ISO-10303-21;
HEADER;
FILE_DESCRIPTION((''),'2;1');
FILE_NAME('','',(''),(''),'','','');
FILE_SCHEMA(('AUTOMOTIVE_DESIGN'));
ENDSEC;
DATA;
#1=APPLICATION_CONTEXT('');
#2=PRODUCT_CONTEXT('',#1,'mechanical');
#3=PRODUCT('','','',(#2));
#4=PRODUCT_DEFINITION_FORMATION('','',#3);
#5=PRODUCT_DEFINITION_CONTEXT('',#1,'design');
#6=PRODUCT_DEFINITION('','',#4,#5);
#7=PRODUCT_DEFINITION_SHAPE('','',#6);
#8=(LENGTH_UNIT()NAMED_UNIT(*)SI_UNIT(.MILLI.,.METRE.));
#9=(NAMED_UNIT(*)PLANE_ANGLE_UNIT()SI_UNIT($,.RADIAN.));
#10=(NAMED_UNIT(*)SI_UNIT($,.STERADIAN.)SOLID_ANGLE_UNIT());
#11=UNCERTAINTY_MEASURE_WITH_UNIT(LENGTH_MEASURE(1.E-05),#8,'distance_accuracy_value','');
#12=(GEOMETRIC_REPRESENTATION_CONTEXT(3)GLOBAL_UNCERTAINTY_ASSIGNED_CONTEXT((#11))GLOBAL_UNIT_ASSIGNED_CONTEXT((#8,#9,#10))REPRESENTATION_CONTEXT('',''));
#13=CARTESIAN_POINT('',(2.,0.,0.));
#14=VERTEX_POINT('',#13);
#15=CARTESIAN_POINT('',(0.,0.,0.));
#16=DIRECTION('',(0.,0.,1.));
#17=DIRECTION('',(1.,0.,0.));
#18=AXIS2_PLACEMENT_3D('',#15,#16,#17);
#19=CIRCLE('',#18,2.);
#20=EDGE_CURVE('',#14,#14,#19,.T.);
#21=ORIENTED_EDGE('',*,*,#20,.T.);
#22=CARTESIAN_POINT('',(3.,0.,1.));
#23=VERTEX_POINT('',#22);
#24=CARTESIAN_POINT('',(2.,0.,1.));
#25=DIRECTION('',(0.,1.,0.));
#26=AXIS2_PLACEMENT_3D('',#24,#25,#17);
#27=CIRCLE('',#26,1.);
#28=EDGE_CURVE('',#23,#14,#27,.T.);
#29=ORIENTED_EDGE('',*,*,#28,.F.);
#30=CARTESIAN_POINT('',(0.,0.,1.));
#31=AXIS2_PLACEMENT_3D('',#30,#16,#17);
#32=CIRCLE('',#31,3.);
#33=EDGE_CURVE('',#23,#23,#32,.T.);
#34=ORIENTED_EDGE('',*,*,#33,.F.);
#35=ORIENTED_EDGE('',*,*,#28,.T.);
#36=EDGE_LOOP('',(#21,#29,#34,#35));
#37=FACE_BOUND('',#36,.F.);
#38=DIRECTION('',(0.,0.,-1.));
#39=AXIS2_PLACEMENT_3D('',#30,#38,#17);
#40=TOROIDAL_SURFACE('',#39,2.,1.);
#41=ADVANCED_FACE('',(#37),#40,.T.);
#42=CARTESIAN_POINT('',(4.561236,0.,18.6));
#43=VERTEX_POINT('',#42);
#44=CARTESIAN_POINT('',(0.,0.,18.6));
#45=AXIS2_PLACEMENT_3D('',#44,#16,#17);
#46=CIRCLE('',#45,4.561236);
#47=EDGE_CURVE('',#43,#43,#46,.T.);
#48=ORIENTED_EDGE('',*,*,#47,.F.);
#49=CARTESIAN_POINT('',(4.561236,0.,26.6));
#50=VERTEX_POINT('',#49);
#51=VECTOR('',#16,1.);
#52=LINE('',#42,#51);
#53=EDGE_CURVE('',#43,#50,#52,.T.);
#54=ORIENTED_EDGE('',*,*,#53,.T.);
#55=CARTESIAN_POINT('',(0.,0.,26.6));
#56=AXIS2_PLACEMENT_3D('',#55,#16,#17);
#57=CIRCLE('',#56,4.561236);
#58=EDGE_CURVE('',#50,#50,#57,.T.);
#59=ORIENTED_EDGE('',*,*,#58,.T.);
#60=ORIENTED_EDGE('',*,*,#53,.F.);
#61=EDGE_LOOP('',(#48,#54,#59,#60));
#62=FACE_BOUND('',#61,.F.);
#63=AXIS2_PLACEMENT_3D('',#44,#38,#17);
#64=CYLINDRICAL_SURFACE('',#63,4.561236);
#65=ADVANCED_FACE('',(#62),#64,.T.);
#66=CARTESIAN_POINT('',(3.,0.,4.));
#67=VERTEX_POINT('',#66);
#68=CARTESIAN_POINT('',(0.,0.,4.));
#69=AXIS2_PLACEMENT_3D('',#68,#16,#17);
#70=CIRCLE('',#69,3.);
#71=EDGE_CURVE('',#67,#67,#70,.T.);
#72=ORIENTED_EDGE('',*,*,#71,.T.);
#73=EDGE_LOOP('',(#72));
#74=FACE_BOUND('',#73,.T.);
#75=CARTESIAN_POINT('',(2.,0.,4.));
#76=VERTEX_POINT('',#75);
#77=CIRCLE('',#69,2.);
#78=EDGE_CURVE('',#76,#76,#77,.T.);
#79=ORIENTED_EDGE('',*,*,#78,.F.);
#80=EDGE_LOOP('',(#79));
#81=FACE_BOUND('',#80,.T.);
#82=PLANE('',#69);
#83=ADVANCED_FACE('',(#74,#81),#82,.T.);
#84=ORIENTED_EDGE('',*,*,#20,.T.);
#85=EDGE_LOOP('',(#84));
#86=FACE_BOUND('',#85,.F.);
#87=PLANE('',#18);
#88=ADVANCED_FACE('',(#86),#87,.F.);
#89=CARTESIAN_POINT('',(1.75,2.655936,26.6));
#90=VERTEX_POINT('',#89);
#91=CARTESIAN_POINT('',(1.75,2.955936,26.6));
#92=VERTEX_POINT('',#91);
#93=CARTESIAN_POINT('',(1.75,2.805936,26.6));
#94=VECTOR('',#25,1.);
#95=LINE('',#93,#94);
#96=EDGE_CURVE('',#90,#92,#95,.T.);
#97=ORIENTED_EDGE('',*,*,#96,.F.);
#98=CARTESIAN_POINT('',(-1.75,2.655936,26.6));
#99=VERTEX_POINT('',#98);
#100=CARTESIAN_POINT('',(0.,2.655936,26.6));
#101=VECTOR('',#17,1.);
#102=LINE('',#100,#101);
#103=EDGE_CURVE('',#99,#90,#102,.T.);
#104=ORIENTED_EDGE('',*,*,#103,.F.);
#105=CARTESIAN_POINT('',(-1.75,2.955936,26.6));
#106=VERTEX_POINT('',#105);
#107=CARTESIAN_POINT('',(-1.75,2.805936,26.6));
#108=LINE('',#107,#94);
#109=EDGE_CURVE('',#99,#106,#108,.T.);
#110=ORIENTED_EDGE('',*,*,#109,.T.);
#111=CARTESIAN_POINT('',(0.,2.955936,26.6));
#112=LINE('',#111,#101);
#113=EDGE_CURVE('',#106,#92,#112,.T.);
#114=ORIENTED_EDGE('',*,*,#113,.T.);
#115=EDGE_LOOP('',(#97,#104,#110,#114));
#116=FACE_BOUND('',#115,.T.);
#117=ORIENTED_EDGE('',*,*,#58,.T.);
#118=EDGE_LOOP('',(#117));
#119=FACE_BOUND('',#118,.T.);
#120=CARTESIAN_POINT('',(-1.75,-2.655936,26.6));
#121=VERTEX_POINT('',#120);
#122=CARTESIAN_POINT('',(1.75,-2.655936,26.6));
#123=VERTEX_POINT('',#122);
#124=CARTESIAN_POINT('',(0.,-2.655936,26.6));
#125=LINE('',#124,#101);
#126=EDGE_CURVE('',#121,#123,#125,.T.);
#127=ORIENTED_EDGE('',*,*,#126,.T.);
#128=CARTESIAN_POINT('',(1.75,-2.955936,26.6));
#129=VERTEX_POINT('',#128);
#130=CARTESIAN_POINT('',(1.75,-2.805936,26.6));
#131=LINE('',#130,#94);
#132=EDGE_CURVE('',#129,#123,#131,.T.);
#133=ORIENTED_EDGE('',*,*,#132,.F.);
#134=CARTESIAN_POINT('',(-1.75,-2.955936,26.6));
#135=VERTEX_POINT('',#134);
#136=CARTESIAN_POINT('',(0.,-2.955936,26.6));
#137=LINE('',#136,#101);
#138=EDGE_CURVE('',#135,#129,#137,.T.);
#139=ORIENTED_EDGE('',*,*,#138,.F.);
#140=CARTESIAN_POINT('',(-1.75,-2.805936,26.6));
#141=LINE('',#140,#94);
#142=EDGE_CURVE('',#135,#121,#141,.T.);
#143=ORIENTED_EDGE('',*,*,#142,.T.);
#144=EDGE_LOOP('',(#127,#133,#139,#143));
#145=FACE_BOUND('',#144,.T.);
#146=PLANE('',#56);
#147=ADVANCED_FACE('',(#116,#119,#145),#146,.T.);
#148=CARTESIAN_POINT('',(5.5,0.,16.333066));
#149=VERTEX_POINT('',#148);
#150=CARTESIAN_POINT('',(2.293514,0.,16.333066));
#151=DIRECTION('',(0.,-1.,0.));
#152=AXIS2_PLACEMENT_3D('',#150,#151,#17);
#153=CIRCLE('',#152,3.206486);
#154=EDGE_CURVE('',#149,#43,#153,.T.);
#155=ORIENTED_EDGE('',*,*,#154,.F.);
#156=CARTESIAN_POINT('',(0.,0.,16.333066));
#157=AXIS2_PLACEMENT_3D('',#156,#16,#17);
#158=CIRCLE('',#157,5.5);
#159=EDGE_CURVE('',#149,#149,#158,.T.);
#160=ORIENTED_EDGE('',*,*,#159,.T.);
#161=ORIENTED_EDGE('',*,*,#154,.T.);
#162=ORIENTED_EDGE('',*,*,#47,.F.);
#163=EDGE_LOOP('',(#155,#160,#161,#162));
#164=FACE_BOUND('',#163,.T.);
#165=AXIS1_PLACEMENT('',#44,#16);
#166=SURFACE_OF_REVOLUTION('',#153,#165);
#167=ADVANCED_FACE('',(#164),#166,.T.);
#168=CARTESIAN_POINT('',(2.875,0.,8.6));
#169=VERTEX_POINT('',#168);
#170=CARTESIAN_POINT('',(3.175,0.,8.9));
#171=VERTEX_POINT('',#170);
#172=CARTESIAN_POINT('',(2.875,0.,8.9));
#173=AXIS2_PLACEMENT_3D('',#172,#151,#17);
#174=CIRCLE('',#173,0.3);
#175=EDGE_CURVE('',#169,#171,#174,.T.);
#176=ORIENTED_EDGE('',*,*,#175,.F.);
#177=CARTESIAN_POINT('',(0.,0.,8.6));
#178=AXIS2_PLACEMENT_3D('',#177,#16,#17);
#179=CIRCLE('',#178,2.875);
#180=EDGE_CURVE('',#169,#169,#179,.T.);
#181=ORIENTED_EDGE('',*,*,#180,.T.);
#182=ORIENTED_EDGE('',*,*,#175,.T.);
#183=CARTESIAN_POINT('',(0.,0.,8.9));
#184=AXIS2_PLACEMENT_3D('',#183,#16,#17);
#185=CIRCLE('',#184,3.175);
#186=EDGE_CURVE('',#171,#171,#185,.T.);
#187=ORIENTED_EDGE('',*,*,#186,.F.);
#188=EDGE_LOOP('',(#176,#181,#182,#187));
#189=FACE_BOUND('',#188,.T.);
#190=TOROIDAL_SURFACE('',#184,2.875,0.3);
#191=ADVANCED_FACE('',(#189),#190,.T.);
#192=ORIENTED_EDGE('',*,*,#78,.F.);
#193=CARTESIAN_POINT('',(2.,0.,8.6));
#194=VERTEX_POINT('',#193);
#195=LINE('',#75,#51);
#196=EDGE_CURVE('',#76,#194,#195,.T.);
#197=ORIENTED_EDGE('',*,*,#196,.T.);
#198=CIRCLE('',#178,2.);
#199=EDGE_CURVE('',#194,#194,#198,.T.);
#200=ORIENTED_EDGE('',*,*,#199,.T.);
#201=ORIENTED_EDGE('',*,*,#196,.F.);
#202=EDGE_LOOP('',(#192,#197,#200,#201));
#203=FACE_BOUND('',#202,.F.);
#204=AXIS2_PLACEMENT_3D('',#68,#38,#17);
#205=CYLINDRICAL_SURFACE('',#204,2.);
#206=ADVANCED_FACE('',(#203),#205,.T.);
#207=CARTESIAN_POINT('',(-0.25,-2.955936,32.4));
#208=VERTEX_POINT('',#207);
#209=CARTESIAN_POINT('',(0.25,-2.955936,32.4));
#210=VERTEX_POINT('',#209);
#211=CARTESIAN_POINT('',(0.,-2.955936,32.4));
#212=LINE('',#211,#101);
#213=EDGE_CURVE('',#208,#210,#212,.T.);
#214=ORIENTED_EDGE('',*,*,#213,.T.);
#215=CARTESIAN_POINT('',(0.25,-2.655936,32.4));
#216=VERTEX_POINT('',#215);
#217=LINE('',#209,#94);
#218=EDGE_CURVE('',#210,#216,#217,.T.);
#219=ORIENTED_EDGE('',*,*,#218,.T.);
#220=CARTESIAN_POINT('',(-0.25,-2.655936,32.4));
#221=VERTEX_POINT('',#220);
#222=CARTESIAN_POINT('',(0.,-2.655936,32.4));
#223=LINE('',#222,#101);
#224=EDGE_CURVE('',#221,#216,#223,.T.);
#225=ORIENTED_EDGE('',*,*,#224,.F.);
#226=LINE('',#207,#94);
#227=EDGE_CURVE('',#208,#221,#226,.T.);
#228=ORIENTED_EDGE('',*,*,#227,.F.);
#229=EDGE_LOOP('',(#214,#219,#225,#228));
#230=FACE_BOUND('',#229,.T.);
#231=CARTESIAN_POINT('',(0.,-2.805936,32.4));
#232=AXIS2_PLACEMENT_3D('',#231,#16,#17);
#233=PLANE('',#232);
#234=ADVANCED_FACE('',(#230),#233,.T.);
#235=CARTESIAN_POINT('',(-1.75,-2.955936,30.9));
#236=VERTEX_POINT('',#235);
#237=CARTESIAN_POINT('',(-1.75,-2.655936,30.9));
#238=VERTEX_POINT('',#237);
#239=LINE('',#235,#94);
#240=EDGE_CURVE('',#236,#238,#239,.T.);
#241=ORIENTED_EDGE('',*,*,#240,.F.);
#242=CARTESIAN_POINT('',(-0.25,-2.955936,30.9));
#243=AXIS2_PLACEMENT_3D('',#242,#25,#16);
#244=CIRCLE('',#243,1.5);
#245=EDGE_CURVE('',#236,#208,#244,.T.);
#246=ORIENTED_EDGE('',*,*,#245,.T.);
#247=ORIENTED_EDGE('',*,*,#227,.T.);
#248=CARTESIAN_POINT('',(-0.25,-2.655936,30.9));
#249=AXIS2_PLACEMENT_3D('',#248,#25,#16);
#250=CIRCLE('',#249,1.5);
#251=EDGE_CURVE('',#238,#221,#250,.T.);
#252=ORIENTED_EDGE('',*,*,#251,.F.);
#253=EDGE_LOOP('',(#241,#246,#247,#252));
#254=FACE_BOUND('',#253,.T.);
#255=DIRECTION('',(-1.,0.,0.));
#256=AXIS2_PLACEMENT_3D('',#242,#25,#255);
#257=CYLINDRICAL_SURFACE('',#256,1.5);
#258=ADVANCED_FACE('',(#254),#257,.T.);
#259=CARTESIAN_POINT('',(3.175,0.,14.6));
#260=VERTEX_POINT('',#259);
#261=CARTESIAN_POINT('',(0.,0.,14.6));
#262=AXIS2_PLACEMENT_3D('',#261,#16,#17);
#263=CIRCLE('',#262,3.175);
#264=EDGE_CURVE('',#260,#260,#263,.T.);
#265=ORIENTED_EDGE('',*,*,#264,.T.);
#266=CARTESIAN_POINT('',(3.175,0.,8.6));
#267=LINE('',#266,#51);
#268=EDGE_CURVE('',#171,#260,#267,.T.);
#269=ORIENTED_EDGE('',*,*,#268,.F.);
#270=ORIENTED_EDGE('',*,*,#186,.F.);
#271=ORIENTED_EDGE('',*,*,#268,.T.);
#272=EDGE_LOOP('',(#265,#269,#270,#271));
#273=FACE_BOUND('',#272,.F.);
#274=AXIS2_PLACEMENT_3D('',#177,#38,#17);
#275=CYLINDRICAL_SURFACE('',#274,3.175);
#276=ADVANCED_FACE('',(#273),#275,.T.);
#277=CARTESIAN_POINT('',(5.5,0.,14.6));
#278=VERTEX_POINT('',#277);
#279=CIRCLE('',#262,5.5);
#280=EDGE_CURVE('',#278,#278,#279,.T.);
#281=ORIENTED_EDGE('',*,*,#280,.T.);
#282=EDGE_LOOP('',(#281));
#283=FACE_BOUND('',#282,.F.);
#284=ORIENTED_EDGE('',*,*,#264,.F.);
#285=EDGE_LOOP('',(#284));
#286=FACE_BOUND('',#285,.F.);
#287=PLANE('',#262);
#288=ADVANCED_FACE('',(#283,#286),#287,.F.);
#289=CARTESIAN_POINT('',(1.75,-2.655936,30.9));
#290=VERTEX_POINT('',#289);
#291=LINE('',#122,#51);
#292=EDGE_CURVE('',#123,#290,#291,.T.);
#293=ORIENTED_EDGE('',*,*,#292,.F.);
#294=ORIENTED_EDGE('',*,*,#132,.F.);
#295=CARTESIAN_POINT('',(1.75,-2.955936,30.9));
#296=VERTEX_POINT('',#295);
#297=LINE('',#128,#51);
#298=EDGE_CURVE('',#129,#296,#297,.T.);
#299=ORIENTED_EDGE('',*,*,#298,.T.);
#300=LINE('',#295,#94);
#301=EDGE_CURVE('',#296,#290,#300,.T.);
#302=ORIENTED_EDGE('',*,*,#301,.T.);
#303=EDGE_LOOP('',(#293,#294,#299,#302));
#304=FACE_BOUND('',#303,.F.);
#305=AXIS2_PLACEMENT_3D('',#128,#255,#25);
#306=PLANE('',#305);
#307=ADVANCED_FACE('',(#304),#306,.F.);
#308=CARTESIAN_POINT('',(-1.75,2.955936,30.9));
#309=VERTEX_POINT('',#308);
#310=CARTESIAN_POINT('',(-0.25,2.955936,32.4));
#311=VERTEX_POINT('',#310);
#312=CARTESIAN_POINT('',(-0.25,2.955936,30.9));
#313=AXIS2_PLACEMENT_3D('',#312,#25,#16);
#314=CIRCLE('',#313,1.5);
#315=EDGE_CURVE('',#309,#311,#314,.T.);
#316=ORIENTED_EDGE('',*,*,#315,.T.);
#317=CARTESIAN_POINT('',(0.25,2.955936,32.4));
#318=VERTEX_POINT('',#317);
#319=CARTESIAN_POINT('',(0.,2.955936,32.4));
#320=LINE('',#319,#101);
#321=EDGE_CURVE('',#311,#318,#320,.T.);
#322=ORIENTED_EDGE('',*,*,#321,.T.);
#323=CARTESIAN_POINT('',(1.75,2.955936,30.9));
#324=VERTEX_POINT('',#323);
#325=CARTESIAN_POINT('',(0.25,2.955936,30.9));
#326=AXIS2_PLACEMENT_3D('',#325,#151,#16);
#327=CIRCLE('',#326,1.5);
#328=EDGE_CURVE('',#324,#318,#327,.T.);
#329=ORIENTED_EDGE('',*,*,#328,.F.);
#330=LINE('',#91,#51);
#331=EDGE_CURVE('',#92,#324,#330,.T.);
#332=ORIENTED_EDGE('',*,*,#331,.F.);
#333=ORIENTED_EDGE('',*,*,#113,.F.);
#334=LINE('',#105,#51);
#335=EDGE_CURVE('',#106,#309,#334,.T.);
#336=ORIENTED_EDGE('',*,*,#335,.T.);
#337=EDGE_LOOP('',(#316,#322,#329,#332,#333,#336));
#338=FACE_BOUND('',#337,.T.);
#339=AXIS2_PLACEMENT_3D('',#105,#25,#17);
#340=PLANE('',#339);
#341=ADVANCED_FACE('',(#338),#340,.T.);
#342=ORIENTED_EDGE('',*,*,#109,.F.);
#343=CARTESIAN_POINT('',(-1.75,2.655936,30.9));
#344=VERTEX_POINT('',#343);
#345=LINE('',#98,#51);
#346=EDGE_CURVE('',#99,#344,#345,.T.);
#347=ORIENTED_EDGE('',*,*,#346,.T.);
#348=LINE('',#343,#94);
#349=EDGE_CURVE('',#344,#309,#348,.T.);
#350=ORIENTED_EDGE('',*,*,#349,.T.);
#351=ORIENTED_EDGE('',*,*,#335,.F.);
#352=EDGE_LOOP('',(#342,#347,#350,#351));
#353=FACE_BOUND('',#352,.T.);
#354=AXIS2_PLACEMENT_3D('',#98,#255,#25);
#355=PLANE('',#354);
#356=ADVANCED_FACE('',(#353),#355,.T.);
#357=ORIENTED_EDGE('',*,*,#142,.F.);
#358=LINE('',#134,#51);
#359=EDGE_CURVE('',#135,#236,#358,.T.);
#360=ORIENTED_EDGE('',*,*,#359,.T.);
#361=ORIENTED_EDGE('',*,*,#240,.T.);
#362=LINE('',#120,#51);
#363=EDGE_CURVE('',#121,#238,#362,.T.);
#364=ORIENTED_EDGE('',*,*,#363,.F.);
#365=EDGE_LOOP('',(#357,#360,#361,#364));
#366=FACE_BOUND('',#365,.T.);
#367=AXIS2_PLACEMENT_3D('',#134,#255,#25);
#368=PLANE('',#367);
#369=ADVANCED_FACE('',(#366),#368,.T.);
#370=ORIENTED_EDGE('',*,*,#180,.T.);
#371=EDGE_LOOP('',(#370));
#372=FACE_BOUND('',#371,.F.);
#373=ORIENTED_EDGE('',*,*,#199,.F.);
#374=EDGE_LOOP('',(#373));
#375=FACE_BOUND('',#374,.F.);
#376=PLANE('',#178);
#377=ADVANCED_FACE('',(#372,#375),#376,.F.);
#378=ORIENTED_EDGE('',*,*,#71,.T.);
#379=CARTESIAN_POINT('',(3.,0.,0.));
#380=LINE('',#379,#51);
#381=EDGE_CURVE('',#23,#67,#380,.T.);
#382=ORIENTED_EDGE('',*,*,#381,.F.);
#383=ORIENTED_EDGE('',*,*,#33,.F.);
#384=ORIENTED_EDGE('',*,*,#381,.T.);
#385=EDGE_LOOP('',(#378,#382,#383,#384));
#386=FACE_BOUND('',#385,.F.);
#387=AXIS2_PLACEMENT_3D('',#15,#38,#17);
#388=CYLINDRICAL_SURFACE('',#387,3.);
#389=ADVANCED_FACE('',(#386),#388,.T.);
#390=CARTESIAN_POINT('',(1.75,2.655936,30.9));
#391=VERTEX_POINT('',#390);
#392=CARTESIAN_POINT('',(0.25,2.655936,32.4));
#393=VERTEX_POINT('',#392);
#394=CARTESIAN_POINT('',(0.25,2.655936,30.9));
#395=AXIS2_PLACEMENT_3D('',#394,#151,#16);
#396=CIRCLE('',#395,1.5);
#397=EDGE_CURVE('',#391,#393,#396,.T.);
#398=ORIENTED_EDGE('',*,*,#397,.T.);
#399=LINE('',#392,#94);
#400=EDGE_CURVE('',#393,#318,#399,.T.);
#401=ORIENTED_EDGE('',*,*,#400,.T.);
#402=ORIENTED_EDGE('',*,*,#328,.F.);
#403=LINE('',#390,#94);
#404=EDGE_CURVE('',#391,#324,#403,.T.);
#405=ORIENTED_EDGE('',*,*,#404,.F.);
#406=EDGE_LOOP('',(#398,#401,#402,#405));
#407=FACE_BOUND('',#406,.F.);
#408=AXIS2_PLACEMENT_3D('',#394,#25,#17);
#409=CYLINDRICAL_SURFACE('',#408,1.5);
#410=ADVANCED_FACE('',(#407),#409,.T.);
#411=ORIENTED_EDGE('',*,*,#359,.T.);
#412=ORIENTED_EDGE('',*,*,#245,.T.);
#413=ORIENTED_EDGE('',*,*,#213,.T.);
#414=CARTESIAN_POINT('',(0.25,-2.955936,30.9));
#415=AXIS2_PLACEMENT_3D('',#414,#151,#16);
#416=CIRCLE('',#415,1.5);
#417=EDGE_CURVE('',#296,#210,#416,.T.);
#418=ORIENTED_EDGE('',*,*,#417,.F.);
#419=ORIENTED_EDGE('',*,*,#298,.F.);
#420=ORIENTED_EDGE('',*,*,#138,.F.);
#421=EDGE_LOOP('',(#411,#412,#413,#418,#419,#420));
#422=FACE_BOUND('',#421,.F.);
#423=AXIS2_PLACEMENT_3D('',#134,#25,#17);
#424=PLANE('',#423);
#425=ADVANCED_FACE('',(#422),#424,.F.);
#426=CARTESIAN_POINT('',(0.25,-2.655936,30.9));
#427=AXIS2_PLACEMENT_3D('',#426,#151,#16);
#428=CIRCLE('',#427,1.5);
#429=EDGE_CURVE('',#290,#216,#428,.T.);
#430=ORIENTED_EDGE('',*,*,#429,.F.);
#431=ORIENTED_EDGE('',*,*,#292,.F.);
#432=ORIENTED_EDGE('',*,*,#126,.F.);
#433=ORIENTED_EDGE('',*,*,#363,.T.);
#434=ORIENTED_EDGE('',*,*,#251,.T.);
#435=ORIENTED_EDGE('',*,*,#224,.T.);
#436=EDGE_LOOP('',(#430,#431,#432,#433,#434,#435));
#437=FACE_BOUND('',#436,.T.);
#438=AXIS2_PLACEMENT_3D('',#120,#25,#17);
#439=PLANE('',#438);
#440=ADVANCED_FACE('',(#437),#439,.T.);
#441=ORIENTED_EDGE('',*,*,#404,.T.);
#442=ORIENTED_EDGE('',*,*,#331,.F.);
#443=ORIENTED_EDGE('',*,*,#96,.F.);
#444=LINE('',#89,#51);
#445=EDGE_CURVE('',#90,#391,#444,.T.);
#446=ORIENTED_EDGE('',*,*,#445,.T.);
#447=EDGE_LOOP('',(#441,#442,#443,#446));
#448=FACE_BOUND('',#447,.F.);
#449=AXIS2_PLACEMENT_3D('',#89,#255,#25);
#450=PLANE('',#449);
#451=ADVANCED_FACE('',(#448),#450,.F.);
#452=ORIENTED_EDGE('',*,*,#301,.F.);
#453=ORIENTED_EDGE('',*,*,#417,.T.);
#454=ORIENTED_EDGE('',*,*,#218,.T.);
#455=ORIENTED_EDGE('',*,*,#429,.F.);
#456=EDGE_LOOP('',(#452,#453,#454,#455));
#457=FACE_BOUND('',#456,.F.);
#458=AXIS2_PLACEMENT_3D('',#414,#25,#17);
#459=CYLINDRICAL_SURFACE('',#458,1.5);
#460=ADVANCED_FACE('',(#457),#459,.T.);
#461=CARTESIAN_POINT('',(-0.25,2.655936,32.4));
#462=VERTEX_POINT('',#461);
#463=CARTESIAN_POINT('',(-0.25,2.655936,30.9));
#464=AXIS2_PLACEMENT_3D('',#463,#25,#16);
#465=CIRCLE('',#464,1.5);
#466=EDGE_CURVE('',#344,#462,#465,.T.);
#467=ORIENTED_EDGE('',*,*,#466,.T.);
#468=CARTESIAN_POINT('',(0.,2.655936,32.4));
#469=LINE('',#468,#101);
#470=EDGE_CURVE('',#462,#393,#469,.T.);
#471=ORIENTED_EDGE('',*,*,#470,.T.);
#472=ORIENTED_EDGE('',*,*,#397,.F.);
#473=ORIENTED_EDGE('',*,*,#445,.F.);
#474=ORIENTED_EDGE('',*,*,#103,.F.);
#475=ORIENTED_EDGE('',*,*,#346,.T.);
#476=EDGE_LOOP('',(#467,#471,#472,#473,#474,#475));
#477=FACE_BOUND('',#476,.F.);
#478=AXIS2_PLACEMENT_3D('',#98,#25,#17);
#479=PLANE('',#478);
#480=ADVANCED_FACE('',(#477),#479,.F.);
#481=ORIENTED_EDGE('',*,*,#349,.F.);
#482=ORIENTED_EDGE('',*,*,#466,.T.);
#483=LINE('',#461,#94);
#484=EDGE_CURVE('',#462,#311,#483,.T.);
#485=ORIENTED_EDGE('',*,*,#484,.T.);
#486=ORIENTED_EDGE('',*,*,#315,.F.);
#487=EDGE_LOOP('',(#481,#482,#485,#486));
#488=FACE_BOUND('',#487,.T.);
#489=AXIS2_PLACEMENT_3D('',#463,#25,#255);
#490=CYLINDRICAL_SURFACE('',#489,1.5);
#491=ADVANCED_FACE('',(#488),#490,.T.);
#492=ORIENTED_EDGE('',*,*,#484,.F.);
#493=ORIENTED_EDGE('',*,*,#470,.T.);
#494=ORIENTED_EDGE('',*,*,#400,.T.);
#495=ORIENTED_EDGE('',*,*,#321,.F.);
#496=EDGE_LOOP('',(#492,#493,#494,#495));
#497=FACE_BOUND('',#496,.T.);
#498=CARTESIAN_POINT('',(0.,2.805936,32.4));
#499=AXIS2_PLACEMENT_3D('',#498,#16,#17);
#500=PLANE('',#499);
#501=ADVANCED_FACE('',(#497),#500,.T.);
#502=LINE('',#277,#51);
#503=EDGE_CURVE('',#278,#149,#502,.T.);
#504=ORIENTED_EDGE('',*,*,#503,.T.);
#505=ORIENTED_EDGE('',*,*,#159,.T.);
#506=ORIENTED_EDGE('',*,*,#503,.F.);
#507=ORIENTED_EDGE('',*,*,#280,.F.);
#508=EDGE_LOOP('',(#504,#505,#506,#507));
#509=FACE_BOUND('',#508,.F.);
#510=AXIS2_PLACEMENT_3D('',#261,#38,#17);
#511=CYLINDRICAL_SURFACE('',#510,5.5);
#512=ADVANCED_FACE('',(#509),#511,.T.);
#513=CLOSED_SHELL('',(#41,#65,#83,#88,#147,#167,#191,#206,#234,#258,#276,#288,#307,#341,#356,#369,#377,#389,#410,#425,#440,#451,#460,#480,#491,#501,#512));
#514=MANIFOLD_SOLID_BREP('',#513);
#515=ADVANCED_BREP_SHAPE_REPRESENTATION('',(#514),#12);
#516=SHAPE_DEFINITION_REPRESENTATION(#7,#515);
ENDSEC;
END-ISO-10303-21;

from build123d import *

# Parameters (mm, degrees)
F0_R      = 3
F1_DEPTH  = 4
F2_R      = 2
F3_DEPTH  = 4.6
F4_R      = 3.175
F5_DEPTH  = 6
F6_R      = 5.5
F7_DEPTH  = 4
F8_R      = 4.5612364212
F9_DEPTH  = 8
F11_R     = 1
F12_R     = 0.3
F13_W     = 3.5
F13_H     = 0.3
F14_DEPTH = 5.8
F15_R     = 1.5


# Not quite as in the source:
# - a fillet or chamfer that OpenCascade refuses, or shapes differently, is made with other operations: its cross-section is extruded or revolved along the edge and cut away or added


with BuildPart() as f1:
    # F0 (on Top) → F1 (new body)
    with BuildSketch(Plane.XY):
        Circle(F0_R)
    extrude(amount=F1_DEPTH)

    # F2 (on face) → F3 (join)
    with BuildSketch(Plane.XY.offset(4)):
        Circle(F2_R)
    extrude(amount=F3_DEPTH)

    # F4 (on face) → F5 (join)
    with BuildSketch(Plane.XY.offset(8.6)):
        Circle(F4_R)
    extrude(amount=F5_DEPTH)

    # F6 (on face) → F7 (join)
    with BuildSketch(Plane.XY.offset(14.6)):
        Circle(F6_R)
    extrude(amount=F7_DEPTH)

    # F8 (on face) → F9 (join)
    with BuildSketch(Plane.XY.offset(18.6)):
        Circle(F8_R)
    extrude(amount=F9_DEPTH)

    # F10: fillet of radius 3.2064860271 on 1 edges, made by hand

    # F10_s1 → F10_t2 (revolve, cut)
    with BuildSketch(Plane.XZ):
        with BuildLine():
            ThreePointArc((5.5, 16.3330664898), (5.256027516, 17.5598778645), (4.5612364212, 18.6))
            Line((4.5612364212, 18.6), (5.5, 18.6))
            Line((5.5, 18.6), (5.5, 16.3330664898))
        make_face()
    revolve(axis=Axis((0, 0, 18.6), (0, 0, 1)), mode=Mode.SUBTRACT)

    # F11
    f11_edges = [f1.edges().sort_by_distance(p)[0] for p in [
        (-3, 0, 0),
    ]]
    fillet(f11_edges, radius=F11_R)

    # F12
    f12_edges = [f1.edges().sort_by_distance(p)[0] for p in [
        (-3.175, 0, 8.6),
    ]]
    fillet(f12_edges, radius=F12_R)

    # F13 (on face) → F14 (join)
    with BuildSketch(Plane.XY.offset(26.6)):
        with Locations((0, 2.8059364047)):
            Rectangle(F13_W, F13_H)
        with Locations((0, -2.8059364047)):
            Rectangle(F13_W, F13_H)
    extrude(amount=F14_DEPTH)

    # F15
    f15_edges = [f1.edges().sort_by_distance(p)[0] for p in [
        (1.75, 2.805936, 32.4),
        (1.75, -2.805936, 32.4),
        (-1.75, -2.805936, 32.4),
        (-1.75, 2.805936, 32.4),
    ]]
    fillet(f15_edges, radius=F15_R)


solid = f1.part
